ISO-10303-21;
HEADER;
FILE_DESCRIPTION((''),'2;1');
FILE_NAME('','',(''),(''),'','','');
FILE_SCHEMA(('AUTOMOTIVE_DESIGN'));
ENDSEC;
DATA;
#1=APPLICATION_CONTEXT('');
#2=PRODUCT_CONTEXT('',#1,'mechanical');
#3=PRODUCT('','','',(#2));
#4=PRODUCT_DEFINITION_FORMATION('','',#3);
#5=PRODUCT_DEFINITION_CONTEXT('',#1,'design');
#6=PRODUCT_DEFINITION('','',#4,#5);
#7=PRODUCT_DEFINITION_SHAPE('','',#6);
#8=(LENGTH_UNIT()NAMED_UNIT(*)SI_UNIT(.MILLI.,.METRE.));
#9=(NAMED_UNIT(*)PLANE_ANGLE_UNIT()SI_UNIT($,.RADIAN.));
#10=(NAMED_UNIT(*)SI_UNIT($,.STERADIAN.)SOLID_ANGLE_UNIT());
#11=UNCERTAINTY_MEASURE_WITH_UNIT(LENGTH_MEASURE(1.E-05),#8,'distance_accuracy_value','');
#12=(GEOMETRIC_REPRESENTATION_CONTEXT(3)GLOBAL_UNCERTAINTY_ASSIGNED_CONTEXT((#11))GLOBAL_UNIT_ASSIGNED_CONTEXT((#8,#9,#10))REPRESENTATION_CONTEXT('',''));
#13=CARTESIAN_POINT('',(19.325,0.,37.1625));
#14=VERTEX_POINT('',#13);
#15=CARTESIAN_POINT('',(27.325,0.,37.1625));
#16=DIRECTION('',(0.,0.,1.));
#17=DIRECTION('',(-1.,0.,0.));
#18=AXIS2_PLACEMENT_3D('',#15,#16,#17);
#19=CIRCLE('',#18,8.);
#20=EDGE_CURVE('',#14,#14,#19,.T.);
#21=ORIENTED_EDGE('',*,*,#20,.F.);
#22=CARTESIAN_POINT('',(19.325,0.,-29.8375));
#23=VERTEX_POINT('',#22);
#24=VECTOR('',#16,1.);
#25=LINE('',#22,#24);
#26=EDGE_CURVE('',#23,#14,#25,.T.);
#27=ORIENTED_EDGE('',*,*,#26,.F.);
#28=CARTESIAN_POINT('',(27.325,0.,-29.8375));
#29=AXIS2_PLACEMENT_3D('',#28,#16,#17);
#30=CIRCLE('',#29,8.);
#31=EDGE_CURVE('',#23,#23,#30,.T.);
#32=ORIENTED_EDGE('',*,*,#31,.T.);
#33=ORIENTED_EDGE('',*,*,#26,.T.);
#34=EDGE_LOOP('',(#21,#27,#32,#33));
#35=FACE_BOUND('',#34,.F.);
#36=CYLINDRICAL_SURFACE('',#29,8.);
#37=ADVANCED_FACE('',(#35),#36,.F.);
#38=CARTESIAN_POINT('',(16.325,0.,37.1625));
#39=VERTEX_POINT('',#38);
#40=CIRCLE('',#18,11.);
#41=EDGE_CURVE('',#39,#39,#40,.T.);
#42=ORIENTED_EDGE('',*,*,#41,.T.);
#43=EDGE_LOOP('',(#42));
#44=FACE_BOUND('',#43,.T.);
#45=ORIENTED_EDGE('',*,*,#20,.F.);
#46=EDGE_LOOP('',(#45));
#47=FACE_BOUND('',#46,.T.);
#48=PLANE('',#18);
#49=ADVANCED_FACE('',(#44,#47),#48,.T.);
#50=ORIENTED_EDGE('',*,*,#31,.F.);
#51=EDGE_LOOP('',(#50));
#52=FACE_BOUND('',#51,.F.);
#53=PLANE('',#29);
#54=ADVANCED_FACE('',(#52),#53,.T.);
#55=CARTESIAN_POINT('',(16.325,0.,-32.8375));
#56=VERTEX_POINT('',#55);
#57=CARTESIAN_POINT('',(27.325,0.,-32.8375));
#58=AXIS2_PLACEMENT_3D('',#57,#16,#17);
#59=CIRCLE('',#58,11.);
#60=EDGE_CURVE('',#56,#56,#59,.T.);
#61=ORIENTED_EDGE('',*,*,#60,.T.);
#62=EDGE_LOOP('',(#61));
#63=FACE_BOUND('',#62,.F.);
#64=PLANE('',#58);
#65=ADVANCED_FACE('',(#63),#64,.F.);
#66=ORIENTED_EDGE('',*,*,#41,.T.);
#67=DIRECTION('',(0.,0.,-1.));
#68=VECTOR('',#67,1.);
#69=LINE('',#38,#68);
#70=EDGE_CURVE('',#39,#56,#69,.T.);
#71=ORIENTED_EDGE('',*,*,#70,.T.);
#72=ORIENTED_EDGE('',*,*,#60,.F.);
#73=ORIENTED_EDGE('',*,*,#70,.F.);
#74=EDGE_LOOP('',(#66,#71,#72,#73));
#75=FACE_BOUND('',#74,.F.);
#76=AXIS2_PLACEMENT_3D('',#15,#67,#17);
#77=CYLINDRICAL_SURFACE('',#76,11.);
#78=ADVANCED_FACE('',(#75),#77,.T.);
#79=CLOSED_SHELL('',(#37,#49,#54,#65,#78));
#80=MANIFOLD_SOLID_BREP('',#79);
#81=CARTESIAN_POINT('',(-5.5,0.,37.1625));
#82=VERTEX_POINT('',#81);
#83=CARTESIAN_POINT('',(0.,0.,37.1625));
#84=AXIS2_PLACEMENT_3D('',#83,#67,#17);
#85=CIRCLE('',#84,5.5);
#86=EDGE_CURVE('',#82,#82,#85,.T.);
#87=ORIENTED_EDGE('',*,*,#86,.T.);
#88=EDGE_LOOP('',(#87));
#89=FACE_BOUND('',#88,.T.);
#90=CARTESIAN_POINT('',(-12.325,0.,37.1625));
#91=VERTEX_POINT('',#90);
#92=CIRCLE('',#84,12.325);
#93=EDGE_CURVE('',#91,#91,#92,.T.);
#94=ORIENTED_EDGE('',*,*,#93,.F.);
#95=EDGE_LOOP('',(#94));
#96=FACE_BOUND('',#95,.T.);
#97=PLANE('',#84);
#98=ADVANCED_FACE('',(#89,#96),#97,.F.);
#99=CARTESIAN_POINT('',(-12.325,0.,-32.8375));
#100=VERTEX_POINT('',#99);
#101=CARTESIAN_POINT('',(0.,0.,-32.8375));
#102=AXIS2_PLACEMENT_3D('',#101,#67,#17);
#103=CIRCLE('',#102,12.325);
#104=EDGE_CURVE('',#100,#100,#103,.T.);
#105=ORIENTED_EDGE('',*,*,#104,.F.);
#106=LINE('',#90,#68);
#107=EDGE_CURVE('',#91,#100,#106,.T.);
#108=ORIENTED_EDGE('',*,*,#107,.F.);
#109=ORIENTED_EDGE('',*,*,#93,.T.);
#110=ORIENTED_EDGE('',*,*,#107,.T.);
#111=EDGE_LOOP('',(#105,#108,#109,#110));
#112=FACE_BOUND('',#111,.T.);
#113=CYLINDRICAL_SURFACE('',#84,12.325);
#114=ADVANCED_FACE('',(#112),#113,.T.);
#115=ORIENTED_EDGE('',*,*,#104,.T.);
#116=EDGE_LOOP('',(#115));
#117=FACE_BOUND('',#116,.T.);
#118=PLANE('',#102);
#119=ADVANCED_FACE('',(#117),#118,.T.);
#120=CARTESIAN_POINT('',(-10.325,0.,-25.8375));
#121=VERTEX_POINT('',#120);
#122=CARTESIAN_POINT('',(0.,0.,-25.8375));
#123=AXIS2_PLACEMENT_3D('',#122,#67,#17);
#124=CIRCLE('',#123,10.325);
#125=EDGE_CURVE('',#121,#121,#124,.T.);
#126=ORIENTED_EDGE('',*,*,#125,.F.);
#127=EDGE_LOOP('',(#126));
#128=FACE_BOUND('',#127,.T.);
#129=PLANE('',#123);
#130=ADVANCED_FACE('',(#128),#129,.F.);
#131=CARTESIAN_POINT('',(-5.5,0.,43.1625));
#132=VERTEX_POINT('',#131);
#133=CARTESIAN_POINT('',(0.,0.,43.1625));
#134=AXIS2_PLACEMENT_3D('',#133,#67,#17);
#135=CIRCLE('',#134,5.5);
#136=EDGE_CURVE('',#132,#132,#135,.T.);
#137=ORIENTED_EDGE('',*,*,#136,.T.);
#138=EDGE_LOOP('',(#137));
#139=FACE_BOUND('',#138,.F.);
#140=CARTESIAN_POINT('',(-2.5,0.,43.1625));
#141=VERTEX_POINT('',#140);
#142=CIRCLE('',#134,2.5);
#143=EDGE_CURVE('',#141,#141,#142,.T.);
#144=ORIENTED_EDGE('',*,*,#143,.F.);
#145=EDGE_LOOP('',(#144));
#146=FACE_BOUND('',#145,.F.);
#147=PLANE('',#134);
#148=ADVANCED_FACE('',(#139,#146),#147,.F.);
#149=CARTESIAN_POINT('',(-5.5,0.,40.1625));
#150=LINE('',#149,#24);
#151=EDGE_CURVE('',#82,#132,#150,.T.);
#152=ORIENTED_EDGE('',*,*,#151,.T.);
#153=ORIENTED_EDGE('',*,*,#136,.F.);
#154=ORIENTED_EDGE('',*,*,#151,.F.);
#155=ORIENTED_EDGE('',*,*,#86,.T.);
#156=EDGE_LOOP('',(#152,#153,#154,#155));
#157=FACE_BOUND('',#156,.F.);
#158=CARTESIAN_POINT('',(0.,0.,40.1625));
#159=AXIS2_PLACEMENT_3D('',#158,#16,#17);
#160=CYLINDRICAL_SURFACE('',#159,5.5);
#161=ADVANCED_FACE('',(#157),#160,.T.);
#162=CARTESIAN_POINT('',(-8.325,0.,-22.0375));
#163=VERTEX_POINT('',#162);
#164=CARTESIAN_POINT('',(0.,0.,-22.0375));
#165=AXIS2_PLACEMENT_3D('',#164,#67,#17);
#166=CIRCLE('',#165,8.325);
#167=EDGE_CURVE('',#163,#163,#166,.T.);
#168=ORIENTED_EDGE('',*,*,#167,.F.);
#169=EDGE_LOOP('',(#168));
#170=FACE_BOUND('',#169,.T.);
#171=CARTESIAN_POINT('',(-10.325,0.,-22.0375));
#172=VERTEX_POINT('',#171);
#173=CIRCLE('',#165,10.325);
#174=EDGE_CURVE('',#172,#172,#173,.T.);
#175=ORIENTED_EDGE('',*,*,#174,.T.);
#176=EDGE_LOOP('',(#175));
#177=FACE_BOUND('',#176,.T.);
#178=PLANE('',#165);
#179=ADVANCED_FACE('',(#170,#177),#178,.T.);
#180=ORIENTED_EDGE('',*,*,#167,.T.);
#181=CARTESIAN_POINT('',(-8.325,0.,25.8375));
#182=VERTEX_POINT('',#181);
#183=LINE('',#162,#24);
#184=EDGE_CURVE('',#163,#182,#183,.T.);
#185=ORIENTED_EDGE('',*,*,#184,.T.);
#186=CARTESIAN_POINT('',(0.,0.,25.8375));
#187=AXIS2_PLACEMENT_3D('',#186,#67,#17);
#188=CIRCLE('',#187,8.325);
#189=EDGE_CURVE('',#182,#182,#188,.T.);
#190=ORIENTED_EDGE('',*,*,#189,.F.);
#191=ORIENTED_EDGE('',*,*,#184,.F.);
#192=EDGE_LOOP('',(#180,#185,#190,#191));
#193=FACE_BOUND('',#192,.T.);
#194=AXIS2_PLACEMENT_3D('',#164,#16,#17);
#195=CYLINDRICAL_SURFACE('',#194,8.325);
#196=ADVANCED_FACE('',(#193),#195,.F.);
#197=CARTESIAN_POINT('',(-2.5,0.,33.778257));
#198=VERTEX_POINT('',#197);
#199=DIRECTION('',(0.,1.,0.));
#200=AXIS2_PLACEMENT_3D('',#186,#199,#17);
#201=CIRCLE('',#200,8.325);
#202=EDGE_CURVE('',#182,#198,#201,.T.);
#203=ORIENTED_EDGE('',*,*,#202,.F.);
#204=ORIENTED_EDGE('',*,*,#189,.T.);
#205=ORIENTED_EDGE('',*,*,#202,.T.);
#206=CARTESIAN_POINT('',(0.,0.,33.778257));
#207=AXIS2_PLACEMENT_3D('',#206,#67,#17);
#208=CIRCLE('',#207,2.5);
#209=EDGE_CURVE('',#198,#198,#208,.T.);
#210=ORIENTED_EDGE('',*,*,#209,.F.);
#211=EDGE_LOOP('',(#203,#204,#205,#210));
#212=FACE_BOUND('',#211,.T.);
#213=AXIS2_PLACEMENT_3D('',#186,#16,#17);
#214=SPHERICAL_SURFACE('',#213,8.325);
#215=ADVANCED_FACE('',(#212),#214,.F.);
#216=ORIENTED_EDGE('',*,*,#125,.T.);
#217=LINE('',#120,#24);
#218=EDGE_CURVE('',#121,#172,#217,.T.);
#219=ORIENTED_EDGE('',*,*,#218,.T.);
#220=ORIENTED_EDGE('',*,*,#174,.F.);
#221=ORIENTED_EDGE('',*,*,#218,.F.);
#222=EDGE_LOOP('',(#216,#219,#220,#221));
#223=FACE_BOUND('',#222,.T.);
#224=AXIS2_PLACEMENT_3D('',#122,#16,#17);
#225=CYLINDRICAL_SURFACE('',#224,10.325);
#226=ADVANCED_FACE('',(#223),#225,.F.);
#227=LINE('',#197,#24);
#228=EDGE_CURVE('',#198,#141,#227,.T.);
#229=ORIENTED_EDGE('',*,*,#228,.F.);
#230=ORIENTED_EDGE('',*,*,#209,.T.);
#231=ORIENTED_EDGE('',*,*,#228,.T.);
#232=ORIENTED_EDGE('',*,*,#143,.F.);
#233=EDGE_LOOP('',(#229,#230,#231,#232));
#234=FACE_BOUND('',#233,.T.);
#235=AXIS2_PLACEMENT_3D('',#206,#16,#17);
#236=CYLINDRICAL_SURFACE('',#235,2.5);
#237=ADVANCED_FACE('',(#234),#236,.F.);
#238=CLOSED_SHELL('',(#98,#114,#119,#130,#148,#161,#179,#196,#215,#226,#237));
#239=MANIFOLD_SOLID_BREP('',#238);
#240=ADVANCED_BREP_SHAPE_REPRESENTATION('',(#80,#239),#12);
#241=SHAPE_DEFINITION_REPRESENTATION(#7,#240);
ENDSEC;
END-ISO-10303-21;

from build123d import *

# Parameters (mm, degrees)
F0_W   = 3
F0_H   = 6
F0_H_2 = 4


# Not quite as in the source:
# - a feature of the source that left no trace in its solid (it failed there, or was rolled back) is left out


with BuildPart() as f1:
    # F0 (on Front) → F1 (revolve)
    with BuildSketch(Plane.XZ):
        with BuildLine():
            Line((-8.325, -22.0375), (-8.325, 25.8375))
            ThreePointArc((-8.325, 25.8375), (-6.7126047478, 30.7615798633), (-2.5, 33.7782572057))
            Line((-2.5, 33.7782572057), (-2.5, 37.1625))
            Line((-2.5, 37.1625), (-5.5, 37.1625))
            Line((-5.5, 37.1625), (-12.325, 37.1625))
            Line((-12.325, 37.1625), (-12.325, -32.8375))
            Line((-12.325, -32.8375), (0, -32.8375))
            Line((0, -32.8375), (0, -26.8375))
            Line((0, -26.8375), (0, -25.8375))
            Line((0, -25.8375), (-8.325, -25.8375))
            Line((-8.325, -25.8375), (-10.325, -25.8375))
            Line((-10.325, -25.8375), (-10.325, -22.0375))
            Line((-10.325, -22.0375), (-8.325, -22.0375))
        make_face()
        with Locations((-4, 40.1625)):
            Rectangle(F0_W, F0_H)
    revolve(axis=Axis((0, 0, -29.3375), (0, 0, -1)))


with BuildPart() as f4:
    # F0 (on Front) → F4 (revolve)
    with BuildSketch(Plane.XZ):
        Polygon((19.325, 33.1625), (16.325, 33.1625), (16.325, -32.8375), (27.325, -32.8375), (27.325, -29.8375), (19.325, -29.8375), align=None)
        with Locations((17.825, 35.1625)):
            Rectangle(F0_W, F0_H_2)
    revolve(axis=Axis((27.325, 0, -31.3375), (0, 0, 1)))


solid = Compound([f1.part, f4.part])
